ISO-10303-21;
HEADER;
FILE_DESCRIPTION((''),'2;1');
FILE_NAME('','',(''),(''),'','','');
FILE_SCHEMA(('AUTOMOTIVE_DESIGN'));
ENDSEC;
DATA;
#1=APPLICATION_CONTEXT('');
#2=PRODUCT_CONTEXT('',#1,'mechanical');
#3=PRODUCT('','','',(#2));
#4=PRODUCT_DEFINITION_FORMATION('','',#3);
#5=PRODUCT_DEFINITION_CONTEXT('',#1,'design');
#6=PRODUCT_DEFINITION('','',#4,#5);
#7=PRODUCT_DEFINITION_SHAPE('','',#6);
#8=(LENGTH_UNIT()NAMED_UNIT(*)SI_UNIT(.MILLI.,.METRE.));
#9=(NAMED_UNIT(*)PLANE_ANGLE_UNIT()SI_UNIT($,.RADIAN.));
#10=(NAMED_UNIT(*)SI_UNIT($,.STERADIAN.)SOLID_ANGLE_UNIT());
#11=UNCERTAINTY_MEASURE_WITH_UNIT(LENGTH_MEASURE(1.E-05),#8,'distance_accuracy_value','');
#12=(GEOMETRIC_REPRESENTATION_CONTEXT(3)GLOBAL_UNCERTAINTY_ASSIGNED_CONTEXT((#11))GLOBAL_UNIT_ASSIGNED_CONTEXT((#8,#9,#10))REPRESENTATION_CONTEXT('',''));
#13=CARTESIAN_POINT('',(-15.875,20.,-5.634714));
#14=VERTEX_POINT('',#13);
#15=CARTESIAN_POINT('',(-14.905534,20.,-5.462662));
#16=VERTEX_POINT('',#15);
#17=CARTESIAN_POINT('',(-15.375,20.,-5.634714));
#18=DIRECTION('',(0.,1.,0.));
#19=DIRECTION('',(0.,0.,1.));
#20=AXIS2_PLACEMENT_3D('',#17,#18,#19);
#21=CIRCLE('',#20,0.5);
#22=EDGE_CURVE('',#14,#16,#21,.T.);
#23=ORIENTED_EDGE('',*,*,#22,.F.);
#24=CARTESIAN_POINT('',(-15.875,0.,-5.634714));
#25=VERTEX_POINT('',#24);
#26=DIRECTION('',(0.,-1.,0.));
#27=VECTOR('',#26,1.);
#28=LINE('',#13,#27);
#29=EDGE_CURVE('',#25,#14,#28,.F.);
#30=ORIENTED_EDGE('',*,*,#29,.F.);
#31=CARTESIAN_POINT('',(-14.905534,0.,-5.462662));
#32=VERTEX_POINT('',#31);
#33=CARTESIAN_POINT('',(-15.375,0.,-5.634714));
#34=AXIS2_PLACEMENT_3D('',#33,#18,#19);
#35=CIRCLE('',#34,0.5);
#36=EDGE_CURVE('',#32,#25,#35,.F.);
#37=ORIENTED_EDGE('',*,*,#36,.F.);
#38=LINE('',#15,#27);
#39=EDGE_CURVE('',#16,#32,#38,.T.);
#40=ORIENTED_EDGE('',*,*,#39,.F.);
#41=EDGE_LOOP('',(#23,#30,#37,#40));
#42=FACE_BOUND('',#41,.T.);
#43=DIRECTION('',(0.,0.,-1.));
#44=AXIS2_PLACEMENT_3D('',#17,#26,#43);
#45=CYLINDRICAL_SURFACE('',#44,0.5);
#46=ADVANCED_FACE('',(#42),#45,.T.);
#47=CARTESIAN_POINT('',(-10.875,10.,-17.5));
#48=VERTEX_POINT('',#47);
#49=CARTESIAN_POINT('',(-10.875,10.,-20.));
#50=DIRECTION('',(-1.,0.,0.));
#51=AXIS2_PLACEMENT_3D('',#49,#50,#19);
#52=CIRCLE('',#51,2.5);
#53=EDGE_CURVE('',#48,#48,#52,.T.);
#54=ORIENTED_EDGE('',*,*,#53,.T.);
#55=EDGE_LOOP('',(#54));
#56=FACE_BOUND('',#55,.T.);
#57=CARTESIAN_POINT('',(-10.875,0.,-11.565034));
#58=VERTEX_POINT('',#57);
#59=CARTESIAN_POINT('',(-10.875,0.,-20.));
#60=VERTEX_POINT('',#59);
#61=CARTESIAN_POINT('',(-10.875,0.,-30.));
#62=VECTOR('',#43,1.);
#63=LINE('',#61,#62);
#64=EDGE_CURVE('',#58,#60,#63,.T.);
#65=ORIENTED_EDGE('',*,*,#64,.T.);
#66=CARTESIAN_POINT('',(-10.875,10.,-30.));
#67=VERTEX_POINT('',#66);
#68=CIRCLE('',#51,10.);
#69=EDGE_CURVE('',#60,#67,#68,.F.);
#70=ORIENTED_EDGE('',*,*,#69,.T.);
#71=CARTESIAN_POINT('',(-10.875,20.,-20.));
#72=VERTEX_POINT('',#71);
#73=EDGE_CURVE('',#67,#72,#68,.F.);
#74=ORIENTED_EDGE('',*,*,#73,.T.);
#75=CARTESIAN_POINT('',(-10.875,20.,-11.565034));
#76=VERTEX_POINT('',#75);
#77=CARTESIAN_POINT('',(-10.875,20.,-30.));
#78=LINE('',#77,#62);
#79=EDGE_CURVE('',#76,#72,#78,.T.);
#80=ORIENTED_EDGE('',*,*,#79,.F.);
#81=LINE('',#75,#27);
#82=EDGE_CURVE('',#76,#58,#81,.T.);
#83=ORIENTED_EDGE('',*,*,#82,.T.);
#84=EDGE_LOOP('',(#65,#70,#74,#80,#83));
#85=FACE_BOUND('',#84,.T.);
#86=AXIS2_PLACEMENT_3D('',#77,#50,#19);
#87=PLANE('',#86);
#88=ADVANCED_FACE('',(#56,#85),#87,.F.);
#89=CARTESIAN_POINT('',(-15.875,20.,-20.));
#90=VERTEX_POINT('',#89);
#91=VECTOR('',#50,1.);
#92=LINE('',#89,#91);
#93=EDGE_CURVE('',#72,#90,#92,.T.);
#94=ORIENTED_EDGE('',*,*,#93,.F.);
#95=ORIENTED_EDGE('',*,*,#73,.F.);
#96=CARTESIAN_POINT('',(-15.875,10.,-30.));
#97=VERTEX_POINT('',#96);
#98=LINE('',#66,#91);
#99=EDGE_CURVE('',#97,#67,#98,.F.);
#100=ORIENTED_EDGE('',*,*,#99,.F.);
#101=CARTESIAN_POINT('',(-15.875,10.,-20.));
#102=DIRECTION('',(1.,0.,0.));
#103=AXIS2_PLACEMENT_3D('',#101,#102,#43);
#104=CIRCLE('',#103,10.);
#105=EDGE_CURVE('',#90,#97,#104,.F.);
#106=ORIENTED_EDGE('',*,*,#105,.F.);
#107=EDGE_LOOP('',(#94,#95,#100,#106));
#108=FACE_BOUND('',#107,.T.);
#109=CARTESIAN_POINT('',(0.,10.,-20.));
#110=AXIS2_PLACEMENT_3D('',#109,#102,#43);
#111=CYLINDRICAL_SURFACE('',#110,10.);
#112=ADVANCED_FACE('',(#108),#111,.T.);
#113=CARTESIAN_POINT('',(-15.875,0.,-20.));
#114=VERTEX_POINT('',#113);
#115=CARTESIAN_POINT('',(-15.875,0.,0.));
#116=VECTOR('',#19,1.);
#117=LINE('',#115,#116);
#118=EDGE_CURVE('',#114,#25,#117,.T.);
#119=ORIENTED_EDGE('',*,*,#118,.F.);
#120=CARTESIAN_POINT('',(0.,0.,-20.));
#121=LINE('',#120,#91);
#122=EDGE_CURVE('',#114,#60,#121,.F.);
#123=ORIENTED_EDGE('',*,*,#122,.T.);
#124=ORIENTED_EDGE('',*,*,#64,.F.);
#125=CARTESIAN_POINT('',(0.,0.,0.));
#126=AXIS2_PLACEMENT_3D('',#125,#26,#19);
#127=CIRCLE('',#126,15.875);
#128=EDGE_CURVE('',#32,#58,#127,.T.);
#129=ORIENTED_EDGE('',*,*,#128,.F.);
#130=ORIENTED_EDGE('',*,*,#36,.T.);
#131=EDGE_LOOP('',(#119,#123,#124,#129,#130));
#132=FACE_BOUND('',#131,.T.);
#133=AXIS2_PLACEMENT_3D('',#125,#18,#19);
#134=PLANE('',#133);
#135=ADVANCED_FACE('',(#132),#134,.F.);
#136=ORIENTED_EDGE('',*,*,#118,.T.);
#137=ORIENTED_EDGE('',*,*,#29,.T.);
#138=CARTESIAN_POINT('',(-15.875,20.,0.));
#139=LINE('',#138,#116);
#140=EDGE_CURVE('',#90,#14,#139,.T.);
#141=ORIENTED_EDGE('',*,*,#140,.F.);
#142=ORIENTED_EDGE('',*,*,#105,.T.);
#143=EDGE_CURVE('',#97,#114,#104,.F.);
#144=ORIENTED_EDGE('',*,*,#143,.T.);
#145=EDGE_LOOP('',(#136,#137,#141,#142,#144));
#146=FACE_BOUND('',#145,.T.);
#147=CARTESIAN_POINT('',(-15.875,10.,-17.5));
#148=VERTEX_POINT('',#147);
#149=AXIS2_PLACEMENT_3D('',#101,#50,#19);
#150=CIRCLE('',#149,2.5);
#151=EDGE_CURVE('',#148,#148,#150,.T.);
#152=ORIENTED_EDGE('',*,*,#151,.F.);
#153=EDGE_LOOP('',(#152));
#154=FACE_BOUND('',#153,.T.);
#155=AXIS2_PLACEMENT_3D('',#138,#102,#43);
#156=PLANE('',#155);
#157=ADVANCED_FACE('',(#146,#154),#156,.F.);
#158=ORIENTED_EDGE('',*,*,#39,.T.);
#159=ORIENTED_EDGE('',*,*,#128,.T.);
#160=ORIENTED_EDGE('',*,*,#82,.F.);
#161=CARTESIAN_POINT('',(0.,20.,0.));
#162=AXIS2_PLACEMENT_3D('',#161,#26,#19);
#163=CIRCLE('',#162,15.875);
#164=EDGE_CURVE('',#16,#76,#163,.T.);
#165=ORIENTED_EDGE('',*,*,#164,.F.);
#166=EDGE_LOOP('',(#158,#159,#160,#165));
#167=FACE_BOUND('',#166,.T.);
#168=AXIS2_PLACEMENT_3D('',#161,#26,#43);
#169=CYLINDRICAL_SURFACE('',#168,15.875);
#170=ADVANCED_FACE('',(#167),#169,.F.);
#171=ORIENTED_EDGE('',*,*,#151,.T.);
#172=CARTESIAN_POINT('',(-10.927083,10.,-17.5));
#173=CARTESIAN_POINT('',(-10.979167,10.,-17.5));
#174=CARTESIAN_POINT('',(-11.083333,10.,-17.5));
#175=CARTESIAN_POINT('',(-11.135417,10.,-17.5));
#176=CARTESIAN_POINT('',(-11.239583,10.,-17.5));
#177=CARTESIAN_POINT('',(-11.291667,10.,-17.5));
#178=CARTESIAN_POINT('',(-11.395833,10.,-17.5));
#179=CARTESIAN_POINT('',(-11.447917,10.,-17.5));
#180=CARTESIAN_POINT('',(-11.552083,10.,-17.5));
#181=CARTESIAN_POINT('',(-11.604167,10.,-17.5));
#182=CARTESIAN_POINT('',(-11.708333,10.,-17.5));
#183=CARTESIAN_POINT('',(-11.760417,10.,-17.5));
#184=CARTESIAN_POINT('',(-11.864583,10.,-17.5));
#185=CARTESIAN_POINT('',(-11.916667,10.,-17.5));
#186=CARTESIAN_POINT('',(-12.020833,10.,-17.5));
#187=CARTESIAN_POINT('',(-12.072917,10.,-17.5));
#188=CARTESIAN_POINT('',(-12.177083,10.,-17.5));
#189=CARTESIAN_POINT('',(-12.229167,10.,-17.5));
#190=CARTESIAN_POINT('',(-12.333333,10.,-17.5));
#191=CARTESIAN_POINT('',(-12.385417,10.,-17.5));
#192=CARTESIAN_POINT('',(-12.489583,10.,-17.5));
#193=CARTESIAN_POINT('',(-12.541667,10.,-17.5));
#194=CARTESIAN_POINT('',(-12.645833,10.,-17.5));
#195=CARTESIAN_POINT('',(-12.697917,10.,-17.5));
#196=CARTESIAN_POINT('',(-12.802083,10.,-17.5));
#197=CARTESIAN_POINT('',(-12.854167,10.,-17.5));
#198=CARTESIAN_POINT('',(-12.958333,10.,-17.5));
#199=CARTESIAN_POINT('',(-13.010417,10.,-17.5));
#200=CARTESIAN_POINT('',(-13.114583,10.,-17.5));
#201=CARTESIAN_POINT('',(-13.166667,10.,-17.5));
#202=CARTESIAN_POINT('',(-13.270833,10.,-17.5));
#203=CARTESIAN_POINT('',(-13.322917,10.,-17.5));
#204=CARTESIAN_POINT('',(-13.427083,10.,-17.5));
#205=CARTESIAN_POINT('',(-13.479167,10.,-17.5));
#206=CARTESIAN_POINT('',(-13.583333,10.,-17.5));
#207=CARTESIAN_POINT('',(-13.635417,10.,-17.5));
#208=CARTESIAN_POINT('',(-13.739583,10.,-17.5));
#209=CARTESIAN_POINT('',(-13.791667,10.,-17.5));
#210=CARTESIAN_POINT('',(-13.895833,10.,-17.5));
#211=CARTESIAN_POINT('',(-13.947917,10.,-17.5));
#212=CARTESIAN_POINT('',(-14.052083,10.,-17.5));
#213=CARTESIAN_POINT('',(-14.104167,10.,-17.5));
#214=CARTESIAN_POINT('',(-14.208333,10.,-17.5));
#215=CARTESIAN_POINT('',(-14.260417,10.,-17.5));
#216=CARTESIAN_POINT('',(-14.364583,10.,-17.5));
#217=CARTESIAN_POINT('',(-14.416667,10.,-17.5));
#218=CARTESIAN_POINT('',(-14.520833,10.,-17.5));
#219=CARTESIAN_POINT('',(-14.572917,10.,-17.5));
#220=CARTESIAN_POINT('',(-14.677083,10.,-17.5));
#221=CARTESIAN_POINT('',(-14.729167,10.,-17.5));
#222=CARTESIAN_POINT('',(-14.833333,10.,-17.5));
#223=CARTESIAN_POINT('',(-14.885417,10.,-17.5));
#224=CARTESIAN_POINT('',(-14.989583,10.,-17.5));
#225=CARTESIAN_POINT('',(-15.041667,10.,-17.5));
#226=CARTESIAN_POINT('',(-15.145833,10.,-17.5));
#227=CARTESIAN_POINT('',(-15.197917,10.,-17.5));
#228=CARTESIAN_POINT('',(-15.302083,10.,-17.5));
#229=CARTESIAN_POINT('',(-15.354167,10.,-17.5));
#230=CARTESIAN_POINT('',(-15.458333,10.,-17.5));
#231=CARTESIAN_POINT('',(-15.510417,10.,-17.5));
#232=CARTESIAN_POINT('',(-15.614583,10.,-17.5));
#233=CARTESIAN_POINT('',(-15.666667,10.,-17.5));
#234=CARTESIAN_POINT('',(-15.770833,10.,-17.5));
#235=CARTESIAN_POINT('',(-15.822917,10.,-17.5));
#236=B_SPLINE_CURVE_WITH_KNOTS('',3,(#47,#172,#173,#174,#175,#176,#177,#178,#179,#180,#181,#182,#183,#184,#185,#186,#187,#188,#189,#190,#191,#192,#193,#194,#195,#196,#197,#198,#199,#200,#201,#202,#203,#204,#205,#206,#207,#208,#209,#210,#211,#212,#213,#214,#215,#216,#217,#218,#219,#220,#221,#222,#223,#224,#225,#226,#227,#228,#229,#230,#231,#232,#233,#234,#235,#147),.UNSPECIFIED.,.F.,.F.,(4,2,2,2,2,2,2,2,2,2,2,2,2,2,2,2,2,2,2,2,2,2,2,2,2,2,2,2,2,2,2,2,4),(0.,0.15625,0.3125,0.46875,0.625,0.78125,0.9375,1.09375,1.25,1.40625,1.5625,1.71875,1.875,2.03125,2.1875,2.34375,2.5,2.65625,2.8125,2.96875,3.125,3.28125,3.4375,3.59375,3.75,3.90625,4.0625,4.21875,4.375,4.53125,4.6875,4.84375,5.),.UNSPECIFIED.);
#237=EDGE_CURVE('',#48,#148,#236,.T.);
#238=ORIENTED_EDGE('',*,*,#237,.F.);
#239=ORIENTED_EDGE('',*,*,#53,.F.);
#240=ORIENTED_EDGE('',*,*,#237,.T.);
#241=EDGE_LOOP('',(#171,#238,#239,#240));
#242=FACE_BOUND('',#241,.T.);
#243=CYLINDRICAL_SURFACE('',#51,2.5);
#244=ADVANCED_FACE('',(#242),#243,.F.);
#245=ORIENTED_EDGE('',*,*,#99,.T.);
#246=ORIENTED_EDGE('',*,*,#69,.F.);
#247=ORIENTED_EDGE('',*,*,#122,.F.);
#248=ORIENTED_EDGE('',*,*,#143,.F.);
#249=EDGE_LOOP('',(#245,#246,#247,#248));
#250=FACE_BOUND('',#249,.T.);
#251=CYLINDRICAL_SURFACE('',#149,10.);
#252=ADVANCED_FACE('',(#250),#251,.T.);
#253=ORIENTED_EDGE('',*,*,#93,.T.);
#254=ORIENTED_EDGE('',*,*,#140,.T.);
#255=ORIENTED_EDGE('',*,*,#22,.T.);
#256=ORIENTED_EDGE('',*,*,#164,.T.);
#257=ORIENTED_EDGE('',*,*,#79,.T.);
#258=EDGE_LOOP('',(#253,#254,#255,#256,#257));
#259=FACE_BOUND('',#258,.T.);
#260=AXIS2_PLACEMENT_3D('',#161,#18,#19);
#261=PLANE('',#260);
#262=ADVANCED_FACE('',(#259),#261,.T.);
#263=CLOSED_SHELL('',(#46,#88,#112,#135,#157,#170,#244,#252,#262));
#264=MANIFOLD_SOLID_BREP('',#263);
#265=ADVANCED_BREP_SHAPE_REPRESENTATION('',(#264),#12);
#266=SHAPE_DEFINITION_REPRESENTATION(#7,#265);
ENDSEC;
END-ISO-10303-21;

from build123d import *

# Parameters (mm, degrees)
BOSS_EXTRUDE1_DEPTH = 20
FILLET1_R           = 10
SKETCH2_R           = 2.5000000000000018
CUT_EXTRUDE1_DEPTH  = 37.40054944640259
FILLET2_R           = 0.5


with BuildPart() as part:
    # Sketch1 → Boss-Extrude1 (new body)
    with BuildSketch(Plane(origin=(0, 0, 0), x_dir=(1, 0, 0), z_dir=(0, 1, 0))):
        with BuildLine():
            Line((-15.875000000000004, 0), (-15.875, 30))
            Line((-15.875, 30), (-10.875, 30))
            Line((-10.875, 30), (-10.874999999999996, 11.565033506220383))
            ThreePointArc((-10.874999999999996, 11.565033506220383), (-14.57148328070962, 6.299801584177079), (-15.875000000000004, 0))
        make_face()
    extrude(amount=BOSS_EXTRUDE1_DEPTH)

    # Fillet1
    fillet1_edges = [part.edges().sort_by_distance(p)[0] for p in [
        (-13.375, 0, -30),
        (-13.375, 20, -30),
    ]]
    fillet(fillet1_edges, radius=FILLET1_R - 0.0001)  # a hair under: the kernel refuses the full size

    # Sketch2 → Cut-Extrude1 (cut, through all)
    with BuildSketch(Plane.ZY.offset(15.875000000000004)):
        with Locations((-19.999999999999996, 10)):
            Circle(SKETCH2_R)
    extrude(amount=-CUT_EXTRUDE1_DEPTH, mode=Mode.SUBTRACT)

    # Fillet2
    fillet2_edges = [part.edges().sort_by_distance(p)[0] for p in [
        (-15.875000000000004, 10, 2.2e-16),
    ]]
    fillet(fillet2_edges, radius=FILLET2_R)


solid = part.part
